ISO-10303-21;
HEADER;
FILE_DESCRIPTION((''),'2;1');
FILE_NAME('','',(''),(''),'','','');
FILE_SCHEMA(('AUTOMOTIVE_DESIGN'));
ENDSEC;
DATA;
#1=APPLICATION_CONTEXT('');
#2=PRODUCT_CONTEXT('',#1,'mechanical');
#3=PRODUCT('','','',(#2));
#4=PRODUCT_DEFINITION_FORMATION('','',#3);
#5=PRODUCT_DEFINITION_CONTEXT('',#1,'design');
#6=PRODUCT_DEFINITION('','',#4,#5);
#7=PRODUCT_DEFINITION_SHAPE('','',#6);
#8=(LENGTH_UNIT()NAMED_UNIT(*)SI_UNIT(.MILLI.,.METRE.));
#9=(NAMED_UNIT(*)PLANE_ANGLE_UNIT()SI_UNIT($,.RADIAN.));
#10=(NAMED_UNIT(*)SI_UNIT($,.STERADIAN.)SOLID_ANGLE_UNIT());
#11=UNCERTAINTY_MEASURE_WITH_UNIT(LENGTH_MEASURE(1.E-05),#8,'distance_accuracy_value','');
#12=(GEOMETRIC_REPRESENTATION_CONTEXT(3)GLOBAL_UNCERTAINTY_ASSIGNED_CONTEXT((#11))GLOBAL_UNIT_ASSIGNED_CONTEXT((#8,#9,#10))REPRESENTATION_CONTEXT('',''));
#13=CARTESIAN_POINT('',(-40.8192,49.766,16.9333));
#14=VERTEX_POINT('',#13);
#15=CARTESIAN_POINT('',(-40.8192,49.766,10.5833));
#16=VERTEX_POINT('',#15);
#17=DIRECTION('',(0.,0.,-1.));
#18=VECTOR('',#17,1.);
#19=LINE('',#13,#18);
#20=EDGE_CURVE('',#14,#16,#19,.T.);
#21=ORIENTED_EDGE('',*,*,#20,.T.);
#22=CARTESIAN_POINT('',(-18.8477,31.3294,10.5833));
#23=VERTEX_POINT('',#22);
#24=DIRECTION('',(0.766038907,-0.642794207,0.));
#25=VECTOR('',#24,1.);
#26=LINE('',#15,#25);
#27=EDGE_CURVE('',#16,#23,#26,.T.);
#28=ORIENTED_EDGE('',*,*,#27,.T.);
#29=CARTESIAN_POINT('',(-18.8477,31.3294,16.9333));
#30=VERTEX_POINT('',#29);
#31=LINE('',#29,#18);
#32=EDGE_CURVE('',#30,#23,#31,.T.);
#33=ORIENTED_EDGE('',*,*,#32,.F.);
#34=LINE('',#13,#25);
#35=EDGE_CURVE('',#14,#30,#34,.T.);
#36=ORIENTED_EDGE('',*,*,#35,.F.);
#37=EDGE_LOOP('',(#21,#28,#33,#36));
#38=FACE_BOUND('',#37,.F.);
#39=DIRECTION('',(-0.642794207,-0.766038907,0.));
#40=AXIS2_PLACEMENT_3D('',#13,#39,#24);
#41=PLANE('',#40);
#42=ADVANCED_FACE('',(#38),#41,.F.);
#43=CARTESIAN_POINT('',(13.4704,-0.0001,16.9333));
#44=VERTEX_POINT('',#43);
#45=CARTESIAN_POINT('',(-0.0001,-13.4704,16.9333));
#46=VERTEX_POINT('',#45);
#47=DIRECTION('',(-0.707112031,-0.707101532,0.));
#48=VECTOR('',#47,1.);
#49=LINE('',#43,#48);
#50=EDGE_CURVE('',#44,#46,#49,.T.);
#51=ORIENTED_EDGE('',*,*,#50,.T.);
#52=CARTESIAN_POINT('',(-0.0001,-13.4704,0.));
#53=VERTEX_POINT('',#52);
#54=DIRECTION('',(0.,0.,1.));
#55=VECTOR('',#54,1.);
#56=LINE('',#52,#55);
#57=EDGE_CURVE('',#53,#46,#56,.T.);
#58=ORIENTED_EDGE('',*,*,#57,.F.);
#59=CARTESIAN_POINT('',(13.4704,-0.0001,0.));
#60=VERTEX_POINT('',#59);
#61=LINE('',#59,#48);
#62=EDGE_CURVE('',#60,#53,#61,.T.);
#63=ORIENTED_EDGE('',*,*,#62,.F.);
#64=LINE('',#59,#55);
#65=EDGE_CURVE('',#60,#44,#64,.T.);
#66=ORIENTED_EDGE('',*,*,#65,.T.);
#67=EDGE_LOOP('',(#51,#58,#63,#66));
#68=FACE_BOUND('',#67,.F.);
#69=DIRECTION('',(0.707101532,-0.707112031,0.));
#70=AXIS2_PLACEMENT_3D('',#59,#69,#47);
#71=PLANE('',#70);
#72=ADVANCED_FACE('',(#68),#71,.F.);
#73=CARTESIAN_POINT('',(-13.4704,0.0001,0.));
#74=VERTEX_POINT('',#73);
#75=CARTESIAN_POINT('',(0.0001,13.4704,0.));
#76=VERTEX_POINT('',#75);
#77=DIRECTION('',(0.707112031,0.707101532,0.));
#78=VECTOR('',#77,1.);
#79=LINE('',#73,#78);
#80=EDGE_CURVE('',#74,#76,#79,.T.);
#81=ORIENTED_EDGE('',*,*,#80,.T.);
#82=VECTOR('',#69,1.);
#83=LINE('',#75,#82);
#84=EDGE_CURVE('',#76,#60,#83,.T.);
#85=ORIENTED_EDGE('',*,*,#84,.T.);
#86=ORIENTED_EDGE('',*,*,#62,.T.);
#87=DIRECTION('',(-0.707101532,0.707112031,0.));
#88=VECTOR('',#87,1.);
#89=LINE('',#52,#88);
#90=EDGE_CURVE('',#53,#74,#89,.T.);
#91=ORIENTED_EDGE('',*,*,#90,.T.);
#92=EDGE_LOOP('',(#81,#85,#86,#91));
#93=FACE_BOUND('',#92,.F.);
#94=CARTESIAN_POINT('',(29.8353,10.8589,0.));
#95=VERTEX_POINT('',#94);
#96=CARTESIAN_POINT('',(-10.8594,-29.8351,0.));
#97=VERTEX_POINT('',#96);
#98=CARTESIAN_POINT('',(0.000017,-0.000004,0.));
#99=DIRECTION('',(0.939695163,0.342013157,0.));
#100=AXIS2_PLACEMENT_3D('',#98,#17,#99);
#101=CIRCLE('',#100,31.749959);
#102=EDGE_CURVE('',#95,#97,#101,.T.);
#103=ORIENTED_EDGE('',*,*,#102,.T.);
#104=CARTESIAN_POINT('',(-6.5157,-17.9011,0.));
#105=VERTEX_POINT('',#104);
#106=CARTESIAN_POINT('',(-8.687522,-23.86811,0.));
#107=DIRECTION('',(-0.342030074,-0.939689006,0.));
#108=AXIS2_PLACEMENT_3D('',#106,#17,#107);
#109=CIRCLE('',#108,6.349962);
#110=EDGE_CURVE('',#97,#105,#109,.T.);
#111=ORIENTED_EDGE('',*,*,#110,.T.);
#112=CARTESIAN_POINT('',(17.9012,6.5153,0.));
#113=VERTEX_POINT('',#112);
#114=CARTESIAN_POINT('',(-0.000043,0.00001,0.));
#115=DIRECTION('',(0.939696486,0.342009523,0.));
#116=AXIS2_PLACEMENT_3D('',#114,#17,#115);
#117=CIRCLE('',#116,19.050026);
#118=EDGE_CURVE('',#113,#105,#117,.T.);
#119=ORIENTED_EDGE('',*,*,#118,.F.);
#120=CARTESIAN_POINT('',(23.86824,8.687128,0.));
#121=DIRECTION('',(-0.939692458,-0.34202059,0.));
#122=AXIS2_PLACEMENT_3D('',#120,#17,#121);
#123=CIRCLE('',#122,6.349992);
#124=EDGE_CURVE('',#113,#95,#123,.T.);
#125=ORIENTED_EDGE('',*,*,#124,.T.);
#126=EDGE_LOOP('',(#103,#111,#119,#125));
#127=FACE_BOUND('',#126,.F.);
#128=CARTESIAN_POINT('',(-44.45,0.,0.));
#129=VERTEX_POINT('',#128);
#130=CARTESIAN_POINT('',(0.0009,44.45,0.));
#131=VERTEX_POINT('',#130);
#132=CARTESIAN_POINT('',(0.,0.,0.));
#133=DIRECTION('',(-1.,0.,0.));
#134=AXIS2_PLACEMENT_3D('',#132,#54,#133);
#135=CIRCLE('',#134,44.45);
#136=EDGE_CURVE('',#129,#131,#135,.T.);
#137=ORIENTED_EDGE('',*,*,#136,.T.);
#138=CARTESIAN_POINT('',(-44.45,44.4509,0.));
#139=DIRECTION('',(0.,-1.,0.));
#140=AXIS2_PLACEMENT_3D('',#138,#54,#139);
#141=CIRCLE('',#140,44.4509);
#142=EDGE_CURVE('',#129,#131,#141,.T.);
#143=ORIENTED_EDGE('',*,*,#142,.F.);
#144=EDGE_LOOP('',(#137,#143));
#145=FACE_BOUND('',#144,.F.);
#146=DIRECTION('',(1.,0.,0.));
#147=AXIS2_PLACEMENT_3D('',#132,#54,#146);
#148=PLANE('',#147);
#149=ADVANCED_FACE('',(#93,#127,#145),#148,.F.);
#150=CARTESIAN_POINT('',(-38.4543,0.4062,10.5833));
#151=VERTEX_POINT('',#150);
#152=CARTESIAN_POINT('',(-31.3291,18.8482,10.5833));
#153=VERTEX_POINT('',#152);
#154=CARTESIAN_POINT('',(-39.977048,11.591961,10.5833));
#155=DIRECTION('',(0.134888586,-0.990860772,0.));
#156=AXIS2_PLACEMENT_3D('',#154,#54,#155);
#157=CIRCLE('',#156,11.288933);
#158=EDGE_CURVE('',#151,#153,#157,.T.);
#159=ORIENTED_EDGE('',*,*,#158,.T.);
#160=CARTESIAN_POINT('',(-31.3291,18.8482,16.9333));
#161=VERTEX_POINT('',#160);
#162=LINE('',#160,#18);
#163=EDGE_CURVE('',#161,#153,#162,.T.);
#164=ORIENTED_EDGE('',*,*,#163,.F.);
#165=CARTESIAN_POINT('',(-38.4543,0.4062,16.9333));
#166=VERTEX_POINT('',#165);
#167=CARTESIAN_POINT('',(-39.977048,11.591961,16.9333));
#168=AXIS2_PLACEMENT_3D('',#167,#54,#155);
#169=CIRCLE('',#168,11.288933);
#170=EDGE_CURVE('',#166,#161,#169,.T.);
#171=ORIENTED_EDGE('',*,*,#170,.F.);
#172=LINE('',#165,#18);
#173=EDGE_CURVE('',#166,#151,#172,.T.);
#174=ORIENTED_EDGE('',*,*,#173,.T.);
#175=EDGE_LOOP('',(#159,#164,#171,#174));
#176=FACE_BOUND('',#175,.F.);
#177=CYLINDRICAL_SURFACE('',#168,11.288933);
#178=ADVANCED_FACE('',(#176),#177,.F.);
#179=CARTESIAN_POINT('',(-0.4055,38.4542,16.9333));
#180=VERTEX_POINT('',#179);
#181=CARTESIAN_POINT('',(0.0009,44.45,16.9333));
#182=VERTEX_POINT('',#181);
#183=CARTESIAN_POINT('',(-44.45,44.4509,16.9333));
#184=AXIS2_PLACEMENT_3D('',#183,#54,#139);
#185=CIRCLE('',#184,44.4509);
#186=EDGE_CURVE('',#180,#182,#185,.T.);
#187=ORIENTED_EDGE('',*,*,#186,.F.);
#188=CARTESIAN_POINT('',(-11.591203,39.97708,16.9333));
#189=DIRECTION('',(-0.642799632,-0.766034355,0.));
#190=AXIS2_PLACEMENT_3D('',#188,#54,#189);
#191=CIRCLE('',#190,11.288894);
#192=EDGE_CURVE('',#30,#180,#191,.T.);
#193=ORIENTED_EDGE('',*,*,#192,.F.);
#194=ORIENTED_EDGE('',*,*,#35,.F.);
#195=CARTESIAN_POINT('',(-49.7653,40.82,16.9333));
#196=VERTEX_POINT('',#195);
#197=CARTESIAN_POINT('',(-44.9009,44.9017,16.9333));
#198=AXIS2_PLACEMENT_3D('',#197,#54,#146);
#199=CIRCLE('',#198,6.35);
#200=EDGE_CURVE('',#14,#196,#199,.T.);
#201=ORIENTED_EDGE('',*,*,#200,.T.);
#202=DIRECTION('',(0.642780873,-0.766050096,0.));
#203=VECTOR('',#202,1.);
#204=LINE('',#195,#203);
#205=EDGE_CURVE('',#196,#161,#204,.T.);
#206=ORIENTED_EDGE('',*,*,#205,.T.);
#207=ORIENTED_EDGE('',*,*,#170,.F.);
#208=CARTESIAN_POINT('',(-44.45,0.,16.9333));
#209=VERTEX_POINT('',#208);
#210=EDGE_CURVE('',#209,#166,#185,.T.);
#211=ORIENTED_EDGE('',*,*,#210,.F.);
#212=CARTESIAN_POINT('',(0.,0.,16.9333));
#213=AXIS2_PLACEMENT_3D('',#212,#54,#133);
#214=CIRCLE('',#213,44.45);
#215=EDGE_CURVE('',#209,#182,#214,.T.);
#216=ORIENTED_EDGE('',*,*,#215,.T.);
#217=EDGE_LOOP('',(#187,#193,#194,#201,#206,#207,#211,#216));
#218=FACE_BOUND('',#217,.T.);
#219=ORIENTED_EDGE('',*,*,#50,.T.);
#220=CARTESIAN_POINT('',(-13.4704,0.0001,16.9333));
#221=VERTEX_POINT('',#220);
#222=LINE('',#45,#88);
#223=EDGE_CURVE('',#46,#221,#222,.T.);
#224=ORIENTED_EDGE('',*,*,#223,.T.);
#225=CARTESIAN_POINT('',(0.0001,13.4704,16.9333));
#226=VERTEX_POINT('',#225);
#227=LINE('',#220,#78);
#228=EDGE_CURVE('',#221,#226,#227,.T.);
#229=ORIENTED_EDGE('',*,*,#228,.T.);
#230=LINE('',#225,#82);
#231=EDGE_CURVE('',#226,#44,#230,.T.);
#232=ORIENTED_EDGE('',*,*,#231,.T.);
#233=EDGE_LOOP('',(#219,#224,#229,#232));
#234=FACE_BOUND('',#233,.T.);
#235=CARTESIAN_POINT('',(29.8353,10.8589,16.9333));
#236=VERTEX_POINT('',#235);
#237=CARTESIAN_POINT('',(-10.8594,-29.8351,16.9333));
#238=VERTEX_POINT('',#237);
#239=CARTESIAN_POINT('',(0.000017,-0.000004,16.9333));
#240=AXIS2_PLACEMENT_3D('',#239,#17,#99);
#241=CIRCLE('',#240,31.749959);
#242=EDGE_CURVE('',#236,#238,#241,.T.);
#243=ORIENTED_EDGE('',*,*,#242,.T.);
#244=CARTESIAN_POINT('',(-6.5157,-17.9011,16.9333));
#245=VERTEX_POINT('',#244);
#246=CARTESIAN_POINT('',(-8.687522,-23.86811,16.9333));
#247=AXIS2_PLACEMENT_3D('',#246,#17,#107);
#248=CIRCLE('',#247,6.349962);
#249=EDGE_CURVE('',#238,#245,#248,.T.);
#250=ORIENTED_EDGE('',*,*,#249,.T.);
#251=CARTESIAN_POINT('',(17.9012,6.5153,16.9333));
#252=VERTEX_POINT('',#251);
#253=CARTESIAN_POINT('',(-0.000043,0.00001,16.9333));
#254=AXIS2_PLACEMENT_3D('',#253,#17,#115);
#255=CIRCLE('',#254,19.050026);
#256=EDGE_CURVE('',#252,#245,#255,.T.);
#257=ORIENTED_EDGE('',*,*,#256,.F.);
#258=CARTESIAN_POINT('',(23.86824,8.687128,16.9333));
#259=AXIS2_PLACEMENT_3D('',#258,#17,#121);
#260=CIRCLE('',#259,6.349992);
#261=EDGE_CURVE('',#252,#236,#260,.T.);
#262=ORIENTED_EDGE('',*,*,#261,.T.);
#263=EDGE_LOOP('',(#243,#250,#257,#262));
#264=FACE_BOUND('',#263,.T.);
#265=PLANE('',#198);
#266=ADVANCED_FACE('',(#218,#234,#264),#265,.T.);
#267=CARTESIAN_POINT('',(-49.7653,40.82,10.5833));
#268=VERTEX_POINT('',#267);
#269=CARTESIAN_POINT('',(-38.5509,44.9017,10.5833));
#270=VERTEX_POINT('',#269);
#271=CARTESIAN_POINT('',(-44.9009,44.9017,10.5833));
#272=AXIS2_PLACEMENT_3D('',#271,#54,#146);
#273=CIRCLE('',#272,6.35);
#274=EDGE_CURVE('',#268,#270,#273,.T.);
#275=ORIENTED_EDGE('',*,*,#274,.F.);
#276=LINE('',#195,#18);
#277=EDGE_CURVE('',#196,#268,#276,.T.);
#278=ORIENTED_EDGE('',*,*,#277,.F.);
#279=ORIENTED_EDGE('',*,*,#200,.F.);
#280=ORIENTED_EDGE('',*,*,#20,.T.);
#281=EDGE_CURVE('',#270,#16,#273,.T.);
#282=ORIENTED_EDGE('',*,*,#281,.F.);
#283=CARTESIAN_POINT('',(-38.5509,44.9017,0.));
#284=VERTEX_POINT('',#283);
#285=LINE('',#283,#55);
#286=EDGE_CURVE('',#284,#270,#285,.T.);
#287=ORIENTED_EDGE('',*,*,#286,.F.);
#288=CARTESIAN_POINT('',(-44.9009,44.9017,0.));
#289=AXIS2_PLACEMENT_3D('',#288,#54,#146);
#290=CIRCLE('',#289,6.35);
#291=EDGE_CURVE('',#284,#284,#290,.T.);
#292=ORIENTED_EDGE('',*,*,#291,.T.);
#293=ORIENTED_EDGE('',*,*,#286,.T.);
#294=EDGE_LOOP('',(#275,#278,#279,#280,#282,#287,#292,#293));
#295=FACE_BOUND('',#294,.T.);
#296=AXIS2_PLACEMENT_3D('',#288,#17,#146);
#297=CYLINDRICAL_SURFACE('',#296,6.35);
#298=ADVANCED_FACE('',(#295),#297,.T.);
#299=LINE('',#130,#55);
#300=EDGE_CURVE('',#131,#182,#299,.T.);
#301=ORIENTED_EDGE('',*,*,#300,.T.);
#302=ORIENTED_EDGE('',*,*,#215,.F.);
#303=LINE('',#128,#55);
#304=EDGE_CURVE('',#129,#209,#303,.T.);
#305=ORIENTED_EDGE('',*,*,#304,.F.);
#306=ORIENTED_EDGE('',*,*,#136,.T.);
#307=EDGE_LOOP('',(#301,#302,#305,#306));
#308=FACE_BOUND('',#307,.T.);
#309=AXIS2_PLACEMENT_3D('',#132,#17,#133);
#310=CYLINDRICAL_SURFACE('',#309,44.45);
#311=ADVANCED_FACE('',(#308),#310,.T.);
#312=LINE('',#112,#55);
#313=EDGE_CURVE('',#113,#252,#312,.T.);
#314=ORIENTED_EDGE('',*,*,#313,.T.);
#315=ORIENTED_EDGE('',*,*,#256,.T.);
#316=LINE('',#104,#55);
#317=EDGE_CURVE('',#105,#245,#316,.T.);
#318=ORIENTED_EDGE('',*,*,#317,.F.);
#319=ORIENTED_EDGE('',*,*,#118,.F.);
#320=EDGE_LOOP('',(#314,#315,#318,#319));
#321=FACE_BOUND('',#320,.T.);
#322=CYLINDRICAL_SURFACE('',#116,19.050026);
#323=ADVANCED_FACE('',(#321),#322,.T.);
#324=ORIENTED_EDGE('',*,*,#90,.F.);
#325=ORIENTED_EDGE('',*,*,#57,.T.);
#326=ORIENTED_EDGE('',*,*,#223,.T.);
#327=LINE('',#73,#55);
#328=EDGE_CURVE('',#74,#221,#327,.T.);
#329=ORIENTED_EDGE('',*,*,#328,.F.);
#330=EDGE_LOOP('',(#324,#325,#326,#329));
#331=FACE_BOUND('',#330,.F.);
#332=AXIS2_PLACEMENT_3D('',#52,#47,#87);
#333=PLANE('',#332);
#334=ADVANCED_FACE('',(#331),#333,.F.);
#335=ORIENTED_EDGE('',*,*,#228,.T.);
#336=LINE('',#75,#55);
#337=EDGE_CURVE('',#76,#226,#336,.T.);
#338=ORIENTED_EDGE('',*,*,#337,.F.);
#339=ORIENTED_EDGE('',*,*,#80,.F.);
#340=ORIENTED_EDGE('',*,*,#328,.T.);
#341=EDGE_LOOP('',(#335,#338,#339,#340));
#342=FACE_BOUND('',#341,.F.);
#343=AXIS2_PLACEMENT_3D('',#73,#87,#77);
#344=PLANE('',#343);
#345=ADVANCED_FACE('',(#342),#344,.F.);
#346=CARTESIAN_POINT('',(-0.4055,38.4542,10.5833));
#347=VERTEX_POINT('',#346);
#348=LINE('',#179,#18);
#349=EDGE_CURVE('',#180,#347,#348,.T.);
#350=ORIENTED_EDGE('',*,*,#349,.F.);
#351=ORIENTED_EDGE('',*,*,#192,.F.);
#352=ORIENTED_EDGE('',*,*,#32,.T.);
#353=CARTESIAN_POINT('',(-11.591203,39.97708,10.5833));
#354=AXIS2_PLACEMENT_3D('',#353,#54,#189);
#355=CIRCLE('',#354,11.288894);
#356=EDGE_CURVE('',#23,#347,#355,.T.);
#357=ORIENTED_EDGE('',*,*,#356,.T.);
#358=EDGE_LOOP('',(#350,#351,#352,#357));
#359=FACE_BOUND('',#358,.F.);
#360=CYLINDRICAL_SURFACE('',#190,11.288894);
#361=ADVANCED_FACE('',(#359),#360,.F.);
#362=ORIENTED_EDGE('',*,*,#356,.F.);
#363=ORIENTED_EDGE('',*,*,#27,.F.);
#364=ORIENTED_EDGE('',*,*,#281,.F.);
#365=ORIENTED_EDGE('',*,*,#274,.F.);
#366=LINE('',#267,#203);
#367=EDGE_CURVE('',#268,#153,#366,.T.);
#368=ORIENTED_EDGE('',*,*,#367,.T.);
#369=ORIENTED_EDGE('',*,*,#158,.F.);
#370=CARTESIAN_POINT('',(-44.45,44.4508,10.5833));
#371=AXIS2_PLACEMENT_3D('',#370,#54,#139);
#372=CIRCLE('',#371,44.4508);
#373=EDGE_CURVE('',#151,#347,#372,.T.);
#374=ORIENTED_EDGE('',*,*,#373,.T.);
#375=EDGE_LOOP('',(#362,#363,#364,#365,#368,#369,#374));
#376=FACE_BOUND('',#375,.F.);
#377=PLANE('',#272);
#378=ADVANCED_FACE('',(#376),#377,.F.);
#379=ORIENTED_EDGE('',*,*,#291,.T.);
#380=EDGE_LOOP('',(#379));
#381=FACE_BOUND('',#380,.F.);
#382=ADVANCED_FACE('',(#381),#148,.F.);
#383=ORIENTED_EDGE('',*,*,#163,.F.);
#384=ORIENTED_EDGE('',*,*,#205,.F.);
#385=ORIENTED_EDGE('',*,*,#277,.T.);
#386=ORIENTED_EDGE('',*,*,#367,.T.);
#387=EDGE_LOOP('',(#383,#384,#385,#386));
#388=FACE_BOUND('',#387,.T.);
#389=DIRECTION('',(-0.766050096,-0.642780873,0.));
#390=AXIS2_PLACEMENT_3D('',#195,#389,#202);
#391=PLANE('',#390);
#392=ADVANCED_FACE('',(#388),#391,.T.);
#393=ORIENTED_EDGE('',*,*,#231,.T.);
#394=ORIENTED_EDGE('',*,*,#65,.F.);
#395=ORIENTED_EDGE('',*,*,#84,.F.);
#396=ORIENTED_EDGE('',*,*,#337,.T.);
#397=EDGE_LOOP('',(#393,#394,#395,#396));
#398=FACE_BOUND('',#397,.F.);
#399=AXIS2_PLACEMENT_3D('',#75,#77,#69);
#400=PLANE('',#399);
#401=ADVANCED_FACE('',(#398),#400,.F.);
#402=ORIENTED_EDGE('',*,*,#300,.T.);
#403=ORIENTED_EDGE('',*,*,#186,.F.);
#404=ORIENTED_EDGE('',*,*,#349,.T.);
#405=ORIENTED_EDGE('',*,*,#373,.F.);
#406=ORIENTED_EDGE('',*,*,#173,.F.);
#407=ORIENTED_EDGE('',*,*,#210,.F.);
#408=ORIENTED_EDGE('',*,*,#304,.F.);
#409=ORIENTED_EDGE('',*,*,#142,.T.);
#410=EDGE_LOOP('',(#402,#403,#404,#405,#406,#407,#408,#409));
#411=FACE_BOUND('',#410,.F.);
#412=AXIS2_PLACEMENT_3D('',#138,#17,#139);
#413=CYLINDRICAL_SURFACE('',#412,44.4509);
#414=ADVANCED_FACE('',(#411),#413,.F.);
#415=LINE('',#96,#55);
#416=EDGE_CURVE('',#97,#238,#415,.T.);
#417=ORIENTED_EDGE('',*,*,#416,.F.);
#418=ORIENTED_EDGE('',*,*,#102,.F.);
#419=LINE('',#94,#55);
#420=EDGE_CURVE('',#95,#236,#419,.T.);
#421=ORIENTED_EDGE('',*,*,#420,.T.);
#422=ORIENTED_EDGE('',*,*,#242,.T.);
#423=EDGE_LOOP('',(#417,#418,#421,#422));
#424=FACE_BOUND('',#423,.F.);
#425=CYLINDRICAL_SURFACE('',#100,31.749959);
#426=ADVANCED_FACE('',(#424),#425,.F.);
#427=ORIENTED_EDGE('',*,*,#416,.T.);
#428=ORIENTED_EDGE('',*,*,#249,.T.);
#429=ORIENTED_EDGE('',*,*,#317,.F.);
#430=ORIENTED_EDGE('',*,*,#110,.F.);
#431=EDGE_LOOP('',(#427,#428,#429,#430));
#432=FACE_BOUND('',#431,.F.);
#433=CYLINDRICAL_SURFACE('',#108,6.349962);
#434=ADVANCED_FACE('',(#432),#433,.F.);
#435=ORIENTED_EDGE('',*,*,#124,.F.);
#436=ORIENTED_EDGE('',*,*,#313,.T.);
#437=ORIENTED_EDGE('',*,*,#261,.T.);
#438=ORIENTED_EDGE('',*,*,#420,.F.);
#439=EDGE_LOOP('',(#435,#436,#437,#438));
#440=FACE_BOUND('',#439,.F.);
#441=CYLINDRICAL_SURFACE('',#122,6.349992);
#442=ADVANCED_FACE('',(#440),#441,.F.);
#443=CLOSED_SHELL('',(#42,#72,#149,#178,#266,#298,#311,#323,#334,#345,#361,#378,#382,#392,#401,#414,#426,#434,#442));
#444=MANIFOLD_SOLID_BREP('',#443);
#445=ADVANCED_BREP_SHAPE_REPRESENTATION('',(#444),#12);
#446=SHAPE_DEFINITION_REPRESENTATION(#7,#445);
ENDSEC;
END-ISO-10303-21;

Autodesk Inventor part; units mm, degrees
ref_plane "YZ Plane" through (0, 0, 0) normal (1, 0, 0) x (0, 1, 0)
ref_plane "XZ Plane" through (0, 0, 0) normal (0, 1, 0) x (-1, 0, 0)
ref_plane "XY Plane" through (0, 0, 0) normal (0, 0, 1) x (1, 0, 0)
sketch "Sketch1" plane through (0, 0, 0) normal (0, 0, 1) x (1, 0, 0)
  line L0 (0, 0) -> (-89.8017, 0) construction
  line L1 (-89.8017, 0) -> (-44.9009, 44.9017) construction
  line L2 (-44.9009, 44.9017) -> (0, 0) construction
  arc A0 (-44.45, 0) -> (0.0009, 44.45) centre (0, 0) ccw
  line L3 (-44.45, 0) -> (-44.45, 44.4509) construction
  line L4 (-44.45, 44.4509) -> (-44.9009, 44.9017) construction
  circle A1 centre (-44.9009, 44.9017) radius 6.35
  arc A2 (-44.45, 0) -> (0.0009, 44.45) centre (-44.45, 44.4509) ccw
  line L5 (0.0001, 13.4704) -> (13.4704, -0.0001)
  line L6 (13.4704, -0.0001) -> (-0.0001, -13.4704)
  line L7 (-0.0001, -13.4704) -> (-13.4704, 0.0001)
  line L8 (-13.4704, 0.0001) -> (0.0001, 13.4704)
  point P0 (-6.7351, 6.7353)
  dimension "d8" = 89.8017
  dimension "d9" = 63.5
  dimension "d10" = 63.5
  dimension "d11" = 44.45
  dimension "d12" = 12.7
  dimension "d84" = 19.05
extrude "Extrusion1" add sketch "Sketch1" along normal blind 16.9333
sketch "Sketch21" plane through (-44.9009, 44.9017, 16.9333) normal (0, 0, 1) x (1, 0, 0)
  circle A0 centre (0, 0) radius 6.35 projected
  line L0 (4.0817, 4.8643) -> (26.0532, -13.5723)
  arc A1 (0.4509, -44.9017) -> (44.9017, -0.4517) centre (0.4509, -0.4509) ccw projected
  line L1 (-4.8644, -4.0817) -> (13.5718, -26.0535)
  circle A2 centre (0, 0) radius 6.35 projected
  line L2 (31.882, -31.8827) -> (26.0532, -13.5723) construction
  line L3 (31.882, -31.8827) -> (13.5718, -26.0535) construction
  arc A3 (6.4466, -44.4955) -> (13.5718, -26.0535) centre (4.9239, -33.3098) ccw
  arc A4 (26.0532, -13.5723) -> (44.4954, -6.4475) centre (33.3097, -4.9246) ccw
  line L4 (0, 0) -> (31.882, -31.8827) construction
  line L5 (13.5718, -26.0535) -> (15.941, -15.9413) construction
  line L6 (15.941, -15.9413) -> (26.0532, -13.5723) construction
  point P0 (44.9009, -44.9017)
  dimension "d85" = 10
  dimension "d86" = 11.2889
extrude "Extrusion18" add sketch "Sketch21" against normal blind 6.35 contours A0 L0 A4 A1 A3 L1
sketch "Sketch22" plane through (0, 0, 0) normal (0, 0, -1) x (-1, 0, 0)
  arc A0 (-17.9012, 6.5153) -> (6.5157, -17.9011) centre (0, 0) ccw
  arc A1 (-29.8353, 10.8589) -> (10.8594, -29.8351) centre (0, 0) ccw
  line L0 (10.8594, -29.8351) -> (6.5157, -17.9011)
  line L1 (-29.8353, 10.8589) -> (-17.9012, 6.5153)
  circle A2 centre (44.9009, 44.9017) radius 6.35 construction
  line L2 (6.5157, -17.9011) -> (44.9009, 44.9017) construction
  line L3 (44.9009, 44.9017) -> (-17.9012, 6.5153) construction
  arc A3 (-17.9012, 6.5153) -> (-29.8353, 10.8589) centre (-23.8683, 8.6871) ccw
  arc A4 (10.8594, -29.8351) -> (6.5157, -17.9011) centre (8.6875, -23.8681) ccw
  dimension "d89" = 19.05
  dimension "d90" = 12.7
  dimension "d91" = 130
extrude "Extrusion19" cut sketch "Sketch22" against normal through all
properties part number "Geneva Drive" material "ABS Plastic"
